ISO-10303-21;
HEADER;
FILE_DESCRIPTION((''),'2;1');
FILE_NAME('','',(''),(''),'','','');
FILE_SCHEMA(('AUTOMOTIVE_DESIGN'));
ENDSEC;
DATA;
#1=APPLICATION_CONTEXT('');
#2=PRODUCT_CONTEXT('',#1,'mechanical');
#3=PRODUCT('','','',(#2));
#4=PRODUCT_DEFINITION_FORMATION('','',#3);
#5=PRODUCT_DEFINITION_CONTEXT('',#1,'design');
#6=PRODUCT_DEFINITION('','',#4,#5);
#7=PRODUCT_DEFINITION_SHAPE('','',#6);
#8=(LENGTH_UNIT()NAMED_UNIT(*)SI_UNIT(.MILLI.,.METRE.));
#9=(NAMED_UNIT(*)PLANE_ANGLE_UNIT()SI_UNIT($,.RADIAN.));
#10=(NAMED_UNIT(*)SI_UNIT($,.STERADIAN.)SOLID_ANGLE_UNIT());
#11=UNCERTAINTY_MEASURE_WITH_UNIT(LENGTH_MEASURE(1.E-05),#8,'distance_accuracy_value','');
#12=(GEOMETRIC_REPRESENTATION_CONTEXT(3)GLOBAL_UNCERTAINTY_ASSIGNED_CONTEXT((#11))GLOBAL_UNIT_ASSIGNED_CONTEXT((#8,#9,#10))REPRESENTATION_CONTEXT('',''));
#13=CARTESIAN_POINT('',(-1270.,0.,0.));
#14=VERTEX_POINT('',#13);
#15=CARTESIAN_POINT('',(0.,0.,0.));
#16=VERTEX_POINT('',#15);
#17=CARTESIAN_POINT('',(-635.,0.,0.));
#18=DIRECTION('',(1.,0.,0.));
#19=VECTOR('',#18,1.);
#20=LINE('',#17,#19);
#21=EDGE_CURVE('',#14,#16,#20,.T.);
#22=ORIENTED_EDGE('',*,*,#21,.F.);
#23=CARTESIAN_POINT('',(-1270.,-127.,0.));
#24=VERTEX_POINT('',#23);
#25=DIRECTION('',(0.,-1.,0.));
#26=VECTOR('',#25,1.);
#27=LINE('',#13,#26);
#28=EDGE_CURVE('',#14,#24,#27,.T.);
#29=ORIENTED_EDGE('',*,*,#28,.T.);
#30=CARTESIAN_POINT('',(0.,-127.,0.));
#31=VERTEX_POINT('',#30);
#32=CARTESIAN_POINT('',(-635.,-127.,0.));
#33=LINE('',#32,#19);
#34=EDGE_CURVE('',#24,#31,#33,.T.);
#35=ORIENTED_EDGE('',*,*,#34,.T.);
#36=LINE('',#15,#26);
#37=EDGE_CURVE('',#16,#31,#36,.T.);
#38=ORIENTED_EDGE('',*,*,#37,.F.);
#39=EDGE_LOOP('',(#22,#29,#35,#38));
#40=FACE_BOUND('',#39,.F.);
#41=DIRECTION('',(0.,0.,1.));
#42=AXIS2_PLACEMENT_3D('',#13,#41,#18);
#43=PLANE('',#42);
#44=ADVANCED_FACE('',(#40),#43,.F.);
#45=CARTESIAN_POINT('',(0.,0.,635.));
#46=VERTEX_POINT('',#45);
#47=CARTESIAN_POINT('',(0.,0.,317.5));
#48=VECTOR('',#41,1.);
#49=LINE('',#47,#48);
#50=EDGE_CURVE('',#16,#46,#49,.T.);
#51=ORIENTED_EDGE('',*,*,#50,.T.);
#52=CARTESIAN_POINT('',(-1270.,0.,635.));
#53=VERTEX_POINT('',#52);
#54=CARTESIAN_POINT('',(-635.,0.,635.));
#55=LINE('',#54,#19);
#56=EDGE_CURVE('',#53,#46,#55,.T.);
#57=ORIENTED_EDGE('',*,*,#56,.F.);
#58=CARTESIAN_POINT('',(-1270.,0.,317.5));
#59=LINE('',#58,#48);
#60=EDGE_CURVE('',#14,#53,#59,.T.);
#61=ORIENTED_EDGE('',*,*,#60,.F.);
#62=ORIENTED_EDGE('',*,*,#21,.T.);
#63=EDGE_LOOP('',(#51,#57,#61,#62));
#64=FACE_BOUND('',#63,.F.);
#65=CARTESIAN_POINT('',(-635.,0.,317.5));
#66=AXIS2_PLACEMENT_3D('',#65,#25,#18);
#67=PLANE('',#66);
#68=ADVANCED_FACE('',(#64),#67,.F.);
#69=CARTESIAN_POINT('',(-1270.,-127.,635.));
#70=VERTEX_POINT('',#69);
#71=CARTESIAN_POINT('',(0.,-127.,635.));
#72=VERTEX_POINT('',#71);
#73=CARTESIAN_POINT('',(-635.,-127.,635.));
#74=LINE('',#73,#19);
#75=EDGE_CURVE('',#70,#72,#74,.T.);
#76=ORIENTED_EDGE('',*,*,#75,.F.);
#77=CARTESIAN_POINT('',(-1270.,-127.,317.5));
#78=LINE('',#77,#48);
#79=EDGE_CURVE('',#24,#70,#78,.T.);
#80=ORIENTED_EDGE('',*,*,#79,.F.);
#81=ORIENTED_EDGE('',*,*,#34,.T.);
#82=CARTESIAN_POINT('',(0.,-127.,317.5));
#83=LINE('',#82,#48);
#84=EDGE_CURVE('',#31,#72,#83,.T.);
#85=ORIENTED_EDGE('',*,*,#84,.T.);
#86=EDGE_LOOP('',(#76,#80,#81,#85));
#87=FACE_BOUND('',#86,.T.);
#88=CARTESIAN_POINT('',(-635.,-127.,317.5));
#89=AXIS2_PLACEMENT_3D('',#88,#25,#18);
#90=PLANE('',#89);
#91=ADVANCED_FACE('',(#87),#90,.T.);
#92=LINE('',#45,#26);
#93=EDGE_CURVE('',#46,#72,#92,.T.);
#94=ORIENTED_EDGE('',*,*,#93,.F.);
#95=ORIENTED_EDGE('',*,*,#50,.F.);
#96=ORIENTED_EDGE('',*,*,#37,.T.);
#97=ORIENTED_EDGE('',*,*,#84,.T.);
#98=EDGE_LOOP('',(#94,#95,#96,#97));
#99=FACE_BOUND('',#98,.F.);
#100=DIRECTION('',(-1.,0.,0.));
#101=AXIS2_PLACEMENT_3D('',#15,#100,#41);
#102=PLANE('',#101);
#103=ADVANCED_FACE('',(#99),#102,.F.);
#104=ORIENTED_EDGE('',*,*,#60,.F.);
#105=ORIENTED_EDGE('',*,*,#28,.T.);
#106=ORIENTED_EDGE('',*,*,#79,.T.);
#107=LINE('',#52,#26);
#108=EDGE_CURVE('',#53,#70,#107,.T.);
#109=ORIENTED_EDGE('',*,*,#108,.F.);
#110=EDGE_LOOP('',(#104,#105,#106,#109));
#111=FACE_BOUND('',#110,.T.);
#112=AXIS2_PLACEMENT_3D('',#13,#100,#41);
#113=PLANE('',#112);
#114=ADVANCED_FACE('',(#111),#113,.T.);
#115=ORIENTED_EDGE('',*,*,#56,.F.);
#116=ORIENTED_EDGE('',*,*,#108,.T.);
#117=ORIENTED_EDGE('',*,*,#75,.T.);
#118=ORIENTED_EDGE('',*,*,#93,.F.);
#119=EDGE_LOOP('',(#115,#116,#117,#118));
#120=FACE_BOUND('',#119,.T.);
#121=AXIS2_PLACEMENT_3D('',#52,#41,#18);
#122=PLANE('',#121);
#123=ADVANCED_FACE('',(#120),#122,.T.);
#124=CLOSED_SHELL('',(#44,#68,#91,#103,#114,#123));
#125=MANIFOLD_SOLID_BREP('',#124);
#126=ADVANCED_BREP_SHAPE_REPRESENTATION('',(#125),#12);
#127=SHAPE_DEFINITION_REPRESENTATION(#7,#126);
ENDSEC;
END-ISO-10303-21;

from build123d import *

# Parameters (mm, degrees)
F1_W     = 1270
F1_H     = 635
F2_DEPTH = 127


# Not quite as in the source:
# - a variable given as a bare number and used for a length is read in inches; the dataset says mm whatever the document's units were


with BuildPart() as f2:
    # F1 (on Front) → F2 (new body)
    with BuildSketch(Plane.XZ):
        with Locations((-635, 317.5)):
            Rectangle(F1_W, F1_H)
    extrude(amount=F2_DEPTH)


solid = f2.part
